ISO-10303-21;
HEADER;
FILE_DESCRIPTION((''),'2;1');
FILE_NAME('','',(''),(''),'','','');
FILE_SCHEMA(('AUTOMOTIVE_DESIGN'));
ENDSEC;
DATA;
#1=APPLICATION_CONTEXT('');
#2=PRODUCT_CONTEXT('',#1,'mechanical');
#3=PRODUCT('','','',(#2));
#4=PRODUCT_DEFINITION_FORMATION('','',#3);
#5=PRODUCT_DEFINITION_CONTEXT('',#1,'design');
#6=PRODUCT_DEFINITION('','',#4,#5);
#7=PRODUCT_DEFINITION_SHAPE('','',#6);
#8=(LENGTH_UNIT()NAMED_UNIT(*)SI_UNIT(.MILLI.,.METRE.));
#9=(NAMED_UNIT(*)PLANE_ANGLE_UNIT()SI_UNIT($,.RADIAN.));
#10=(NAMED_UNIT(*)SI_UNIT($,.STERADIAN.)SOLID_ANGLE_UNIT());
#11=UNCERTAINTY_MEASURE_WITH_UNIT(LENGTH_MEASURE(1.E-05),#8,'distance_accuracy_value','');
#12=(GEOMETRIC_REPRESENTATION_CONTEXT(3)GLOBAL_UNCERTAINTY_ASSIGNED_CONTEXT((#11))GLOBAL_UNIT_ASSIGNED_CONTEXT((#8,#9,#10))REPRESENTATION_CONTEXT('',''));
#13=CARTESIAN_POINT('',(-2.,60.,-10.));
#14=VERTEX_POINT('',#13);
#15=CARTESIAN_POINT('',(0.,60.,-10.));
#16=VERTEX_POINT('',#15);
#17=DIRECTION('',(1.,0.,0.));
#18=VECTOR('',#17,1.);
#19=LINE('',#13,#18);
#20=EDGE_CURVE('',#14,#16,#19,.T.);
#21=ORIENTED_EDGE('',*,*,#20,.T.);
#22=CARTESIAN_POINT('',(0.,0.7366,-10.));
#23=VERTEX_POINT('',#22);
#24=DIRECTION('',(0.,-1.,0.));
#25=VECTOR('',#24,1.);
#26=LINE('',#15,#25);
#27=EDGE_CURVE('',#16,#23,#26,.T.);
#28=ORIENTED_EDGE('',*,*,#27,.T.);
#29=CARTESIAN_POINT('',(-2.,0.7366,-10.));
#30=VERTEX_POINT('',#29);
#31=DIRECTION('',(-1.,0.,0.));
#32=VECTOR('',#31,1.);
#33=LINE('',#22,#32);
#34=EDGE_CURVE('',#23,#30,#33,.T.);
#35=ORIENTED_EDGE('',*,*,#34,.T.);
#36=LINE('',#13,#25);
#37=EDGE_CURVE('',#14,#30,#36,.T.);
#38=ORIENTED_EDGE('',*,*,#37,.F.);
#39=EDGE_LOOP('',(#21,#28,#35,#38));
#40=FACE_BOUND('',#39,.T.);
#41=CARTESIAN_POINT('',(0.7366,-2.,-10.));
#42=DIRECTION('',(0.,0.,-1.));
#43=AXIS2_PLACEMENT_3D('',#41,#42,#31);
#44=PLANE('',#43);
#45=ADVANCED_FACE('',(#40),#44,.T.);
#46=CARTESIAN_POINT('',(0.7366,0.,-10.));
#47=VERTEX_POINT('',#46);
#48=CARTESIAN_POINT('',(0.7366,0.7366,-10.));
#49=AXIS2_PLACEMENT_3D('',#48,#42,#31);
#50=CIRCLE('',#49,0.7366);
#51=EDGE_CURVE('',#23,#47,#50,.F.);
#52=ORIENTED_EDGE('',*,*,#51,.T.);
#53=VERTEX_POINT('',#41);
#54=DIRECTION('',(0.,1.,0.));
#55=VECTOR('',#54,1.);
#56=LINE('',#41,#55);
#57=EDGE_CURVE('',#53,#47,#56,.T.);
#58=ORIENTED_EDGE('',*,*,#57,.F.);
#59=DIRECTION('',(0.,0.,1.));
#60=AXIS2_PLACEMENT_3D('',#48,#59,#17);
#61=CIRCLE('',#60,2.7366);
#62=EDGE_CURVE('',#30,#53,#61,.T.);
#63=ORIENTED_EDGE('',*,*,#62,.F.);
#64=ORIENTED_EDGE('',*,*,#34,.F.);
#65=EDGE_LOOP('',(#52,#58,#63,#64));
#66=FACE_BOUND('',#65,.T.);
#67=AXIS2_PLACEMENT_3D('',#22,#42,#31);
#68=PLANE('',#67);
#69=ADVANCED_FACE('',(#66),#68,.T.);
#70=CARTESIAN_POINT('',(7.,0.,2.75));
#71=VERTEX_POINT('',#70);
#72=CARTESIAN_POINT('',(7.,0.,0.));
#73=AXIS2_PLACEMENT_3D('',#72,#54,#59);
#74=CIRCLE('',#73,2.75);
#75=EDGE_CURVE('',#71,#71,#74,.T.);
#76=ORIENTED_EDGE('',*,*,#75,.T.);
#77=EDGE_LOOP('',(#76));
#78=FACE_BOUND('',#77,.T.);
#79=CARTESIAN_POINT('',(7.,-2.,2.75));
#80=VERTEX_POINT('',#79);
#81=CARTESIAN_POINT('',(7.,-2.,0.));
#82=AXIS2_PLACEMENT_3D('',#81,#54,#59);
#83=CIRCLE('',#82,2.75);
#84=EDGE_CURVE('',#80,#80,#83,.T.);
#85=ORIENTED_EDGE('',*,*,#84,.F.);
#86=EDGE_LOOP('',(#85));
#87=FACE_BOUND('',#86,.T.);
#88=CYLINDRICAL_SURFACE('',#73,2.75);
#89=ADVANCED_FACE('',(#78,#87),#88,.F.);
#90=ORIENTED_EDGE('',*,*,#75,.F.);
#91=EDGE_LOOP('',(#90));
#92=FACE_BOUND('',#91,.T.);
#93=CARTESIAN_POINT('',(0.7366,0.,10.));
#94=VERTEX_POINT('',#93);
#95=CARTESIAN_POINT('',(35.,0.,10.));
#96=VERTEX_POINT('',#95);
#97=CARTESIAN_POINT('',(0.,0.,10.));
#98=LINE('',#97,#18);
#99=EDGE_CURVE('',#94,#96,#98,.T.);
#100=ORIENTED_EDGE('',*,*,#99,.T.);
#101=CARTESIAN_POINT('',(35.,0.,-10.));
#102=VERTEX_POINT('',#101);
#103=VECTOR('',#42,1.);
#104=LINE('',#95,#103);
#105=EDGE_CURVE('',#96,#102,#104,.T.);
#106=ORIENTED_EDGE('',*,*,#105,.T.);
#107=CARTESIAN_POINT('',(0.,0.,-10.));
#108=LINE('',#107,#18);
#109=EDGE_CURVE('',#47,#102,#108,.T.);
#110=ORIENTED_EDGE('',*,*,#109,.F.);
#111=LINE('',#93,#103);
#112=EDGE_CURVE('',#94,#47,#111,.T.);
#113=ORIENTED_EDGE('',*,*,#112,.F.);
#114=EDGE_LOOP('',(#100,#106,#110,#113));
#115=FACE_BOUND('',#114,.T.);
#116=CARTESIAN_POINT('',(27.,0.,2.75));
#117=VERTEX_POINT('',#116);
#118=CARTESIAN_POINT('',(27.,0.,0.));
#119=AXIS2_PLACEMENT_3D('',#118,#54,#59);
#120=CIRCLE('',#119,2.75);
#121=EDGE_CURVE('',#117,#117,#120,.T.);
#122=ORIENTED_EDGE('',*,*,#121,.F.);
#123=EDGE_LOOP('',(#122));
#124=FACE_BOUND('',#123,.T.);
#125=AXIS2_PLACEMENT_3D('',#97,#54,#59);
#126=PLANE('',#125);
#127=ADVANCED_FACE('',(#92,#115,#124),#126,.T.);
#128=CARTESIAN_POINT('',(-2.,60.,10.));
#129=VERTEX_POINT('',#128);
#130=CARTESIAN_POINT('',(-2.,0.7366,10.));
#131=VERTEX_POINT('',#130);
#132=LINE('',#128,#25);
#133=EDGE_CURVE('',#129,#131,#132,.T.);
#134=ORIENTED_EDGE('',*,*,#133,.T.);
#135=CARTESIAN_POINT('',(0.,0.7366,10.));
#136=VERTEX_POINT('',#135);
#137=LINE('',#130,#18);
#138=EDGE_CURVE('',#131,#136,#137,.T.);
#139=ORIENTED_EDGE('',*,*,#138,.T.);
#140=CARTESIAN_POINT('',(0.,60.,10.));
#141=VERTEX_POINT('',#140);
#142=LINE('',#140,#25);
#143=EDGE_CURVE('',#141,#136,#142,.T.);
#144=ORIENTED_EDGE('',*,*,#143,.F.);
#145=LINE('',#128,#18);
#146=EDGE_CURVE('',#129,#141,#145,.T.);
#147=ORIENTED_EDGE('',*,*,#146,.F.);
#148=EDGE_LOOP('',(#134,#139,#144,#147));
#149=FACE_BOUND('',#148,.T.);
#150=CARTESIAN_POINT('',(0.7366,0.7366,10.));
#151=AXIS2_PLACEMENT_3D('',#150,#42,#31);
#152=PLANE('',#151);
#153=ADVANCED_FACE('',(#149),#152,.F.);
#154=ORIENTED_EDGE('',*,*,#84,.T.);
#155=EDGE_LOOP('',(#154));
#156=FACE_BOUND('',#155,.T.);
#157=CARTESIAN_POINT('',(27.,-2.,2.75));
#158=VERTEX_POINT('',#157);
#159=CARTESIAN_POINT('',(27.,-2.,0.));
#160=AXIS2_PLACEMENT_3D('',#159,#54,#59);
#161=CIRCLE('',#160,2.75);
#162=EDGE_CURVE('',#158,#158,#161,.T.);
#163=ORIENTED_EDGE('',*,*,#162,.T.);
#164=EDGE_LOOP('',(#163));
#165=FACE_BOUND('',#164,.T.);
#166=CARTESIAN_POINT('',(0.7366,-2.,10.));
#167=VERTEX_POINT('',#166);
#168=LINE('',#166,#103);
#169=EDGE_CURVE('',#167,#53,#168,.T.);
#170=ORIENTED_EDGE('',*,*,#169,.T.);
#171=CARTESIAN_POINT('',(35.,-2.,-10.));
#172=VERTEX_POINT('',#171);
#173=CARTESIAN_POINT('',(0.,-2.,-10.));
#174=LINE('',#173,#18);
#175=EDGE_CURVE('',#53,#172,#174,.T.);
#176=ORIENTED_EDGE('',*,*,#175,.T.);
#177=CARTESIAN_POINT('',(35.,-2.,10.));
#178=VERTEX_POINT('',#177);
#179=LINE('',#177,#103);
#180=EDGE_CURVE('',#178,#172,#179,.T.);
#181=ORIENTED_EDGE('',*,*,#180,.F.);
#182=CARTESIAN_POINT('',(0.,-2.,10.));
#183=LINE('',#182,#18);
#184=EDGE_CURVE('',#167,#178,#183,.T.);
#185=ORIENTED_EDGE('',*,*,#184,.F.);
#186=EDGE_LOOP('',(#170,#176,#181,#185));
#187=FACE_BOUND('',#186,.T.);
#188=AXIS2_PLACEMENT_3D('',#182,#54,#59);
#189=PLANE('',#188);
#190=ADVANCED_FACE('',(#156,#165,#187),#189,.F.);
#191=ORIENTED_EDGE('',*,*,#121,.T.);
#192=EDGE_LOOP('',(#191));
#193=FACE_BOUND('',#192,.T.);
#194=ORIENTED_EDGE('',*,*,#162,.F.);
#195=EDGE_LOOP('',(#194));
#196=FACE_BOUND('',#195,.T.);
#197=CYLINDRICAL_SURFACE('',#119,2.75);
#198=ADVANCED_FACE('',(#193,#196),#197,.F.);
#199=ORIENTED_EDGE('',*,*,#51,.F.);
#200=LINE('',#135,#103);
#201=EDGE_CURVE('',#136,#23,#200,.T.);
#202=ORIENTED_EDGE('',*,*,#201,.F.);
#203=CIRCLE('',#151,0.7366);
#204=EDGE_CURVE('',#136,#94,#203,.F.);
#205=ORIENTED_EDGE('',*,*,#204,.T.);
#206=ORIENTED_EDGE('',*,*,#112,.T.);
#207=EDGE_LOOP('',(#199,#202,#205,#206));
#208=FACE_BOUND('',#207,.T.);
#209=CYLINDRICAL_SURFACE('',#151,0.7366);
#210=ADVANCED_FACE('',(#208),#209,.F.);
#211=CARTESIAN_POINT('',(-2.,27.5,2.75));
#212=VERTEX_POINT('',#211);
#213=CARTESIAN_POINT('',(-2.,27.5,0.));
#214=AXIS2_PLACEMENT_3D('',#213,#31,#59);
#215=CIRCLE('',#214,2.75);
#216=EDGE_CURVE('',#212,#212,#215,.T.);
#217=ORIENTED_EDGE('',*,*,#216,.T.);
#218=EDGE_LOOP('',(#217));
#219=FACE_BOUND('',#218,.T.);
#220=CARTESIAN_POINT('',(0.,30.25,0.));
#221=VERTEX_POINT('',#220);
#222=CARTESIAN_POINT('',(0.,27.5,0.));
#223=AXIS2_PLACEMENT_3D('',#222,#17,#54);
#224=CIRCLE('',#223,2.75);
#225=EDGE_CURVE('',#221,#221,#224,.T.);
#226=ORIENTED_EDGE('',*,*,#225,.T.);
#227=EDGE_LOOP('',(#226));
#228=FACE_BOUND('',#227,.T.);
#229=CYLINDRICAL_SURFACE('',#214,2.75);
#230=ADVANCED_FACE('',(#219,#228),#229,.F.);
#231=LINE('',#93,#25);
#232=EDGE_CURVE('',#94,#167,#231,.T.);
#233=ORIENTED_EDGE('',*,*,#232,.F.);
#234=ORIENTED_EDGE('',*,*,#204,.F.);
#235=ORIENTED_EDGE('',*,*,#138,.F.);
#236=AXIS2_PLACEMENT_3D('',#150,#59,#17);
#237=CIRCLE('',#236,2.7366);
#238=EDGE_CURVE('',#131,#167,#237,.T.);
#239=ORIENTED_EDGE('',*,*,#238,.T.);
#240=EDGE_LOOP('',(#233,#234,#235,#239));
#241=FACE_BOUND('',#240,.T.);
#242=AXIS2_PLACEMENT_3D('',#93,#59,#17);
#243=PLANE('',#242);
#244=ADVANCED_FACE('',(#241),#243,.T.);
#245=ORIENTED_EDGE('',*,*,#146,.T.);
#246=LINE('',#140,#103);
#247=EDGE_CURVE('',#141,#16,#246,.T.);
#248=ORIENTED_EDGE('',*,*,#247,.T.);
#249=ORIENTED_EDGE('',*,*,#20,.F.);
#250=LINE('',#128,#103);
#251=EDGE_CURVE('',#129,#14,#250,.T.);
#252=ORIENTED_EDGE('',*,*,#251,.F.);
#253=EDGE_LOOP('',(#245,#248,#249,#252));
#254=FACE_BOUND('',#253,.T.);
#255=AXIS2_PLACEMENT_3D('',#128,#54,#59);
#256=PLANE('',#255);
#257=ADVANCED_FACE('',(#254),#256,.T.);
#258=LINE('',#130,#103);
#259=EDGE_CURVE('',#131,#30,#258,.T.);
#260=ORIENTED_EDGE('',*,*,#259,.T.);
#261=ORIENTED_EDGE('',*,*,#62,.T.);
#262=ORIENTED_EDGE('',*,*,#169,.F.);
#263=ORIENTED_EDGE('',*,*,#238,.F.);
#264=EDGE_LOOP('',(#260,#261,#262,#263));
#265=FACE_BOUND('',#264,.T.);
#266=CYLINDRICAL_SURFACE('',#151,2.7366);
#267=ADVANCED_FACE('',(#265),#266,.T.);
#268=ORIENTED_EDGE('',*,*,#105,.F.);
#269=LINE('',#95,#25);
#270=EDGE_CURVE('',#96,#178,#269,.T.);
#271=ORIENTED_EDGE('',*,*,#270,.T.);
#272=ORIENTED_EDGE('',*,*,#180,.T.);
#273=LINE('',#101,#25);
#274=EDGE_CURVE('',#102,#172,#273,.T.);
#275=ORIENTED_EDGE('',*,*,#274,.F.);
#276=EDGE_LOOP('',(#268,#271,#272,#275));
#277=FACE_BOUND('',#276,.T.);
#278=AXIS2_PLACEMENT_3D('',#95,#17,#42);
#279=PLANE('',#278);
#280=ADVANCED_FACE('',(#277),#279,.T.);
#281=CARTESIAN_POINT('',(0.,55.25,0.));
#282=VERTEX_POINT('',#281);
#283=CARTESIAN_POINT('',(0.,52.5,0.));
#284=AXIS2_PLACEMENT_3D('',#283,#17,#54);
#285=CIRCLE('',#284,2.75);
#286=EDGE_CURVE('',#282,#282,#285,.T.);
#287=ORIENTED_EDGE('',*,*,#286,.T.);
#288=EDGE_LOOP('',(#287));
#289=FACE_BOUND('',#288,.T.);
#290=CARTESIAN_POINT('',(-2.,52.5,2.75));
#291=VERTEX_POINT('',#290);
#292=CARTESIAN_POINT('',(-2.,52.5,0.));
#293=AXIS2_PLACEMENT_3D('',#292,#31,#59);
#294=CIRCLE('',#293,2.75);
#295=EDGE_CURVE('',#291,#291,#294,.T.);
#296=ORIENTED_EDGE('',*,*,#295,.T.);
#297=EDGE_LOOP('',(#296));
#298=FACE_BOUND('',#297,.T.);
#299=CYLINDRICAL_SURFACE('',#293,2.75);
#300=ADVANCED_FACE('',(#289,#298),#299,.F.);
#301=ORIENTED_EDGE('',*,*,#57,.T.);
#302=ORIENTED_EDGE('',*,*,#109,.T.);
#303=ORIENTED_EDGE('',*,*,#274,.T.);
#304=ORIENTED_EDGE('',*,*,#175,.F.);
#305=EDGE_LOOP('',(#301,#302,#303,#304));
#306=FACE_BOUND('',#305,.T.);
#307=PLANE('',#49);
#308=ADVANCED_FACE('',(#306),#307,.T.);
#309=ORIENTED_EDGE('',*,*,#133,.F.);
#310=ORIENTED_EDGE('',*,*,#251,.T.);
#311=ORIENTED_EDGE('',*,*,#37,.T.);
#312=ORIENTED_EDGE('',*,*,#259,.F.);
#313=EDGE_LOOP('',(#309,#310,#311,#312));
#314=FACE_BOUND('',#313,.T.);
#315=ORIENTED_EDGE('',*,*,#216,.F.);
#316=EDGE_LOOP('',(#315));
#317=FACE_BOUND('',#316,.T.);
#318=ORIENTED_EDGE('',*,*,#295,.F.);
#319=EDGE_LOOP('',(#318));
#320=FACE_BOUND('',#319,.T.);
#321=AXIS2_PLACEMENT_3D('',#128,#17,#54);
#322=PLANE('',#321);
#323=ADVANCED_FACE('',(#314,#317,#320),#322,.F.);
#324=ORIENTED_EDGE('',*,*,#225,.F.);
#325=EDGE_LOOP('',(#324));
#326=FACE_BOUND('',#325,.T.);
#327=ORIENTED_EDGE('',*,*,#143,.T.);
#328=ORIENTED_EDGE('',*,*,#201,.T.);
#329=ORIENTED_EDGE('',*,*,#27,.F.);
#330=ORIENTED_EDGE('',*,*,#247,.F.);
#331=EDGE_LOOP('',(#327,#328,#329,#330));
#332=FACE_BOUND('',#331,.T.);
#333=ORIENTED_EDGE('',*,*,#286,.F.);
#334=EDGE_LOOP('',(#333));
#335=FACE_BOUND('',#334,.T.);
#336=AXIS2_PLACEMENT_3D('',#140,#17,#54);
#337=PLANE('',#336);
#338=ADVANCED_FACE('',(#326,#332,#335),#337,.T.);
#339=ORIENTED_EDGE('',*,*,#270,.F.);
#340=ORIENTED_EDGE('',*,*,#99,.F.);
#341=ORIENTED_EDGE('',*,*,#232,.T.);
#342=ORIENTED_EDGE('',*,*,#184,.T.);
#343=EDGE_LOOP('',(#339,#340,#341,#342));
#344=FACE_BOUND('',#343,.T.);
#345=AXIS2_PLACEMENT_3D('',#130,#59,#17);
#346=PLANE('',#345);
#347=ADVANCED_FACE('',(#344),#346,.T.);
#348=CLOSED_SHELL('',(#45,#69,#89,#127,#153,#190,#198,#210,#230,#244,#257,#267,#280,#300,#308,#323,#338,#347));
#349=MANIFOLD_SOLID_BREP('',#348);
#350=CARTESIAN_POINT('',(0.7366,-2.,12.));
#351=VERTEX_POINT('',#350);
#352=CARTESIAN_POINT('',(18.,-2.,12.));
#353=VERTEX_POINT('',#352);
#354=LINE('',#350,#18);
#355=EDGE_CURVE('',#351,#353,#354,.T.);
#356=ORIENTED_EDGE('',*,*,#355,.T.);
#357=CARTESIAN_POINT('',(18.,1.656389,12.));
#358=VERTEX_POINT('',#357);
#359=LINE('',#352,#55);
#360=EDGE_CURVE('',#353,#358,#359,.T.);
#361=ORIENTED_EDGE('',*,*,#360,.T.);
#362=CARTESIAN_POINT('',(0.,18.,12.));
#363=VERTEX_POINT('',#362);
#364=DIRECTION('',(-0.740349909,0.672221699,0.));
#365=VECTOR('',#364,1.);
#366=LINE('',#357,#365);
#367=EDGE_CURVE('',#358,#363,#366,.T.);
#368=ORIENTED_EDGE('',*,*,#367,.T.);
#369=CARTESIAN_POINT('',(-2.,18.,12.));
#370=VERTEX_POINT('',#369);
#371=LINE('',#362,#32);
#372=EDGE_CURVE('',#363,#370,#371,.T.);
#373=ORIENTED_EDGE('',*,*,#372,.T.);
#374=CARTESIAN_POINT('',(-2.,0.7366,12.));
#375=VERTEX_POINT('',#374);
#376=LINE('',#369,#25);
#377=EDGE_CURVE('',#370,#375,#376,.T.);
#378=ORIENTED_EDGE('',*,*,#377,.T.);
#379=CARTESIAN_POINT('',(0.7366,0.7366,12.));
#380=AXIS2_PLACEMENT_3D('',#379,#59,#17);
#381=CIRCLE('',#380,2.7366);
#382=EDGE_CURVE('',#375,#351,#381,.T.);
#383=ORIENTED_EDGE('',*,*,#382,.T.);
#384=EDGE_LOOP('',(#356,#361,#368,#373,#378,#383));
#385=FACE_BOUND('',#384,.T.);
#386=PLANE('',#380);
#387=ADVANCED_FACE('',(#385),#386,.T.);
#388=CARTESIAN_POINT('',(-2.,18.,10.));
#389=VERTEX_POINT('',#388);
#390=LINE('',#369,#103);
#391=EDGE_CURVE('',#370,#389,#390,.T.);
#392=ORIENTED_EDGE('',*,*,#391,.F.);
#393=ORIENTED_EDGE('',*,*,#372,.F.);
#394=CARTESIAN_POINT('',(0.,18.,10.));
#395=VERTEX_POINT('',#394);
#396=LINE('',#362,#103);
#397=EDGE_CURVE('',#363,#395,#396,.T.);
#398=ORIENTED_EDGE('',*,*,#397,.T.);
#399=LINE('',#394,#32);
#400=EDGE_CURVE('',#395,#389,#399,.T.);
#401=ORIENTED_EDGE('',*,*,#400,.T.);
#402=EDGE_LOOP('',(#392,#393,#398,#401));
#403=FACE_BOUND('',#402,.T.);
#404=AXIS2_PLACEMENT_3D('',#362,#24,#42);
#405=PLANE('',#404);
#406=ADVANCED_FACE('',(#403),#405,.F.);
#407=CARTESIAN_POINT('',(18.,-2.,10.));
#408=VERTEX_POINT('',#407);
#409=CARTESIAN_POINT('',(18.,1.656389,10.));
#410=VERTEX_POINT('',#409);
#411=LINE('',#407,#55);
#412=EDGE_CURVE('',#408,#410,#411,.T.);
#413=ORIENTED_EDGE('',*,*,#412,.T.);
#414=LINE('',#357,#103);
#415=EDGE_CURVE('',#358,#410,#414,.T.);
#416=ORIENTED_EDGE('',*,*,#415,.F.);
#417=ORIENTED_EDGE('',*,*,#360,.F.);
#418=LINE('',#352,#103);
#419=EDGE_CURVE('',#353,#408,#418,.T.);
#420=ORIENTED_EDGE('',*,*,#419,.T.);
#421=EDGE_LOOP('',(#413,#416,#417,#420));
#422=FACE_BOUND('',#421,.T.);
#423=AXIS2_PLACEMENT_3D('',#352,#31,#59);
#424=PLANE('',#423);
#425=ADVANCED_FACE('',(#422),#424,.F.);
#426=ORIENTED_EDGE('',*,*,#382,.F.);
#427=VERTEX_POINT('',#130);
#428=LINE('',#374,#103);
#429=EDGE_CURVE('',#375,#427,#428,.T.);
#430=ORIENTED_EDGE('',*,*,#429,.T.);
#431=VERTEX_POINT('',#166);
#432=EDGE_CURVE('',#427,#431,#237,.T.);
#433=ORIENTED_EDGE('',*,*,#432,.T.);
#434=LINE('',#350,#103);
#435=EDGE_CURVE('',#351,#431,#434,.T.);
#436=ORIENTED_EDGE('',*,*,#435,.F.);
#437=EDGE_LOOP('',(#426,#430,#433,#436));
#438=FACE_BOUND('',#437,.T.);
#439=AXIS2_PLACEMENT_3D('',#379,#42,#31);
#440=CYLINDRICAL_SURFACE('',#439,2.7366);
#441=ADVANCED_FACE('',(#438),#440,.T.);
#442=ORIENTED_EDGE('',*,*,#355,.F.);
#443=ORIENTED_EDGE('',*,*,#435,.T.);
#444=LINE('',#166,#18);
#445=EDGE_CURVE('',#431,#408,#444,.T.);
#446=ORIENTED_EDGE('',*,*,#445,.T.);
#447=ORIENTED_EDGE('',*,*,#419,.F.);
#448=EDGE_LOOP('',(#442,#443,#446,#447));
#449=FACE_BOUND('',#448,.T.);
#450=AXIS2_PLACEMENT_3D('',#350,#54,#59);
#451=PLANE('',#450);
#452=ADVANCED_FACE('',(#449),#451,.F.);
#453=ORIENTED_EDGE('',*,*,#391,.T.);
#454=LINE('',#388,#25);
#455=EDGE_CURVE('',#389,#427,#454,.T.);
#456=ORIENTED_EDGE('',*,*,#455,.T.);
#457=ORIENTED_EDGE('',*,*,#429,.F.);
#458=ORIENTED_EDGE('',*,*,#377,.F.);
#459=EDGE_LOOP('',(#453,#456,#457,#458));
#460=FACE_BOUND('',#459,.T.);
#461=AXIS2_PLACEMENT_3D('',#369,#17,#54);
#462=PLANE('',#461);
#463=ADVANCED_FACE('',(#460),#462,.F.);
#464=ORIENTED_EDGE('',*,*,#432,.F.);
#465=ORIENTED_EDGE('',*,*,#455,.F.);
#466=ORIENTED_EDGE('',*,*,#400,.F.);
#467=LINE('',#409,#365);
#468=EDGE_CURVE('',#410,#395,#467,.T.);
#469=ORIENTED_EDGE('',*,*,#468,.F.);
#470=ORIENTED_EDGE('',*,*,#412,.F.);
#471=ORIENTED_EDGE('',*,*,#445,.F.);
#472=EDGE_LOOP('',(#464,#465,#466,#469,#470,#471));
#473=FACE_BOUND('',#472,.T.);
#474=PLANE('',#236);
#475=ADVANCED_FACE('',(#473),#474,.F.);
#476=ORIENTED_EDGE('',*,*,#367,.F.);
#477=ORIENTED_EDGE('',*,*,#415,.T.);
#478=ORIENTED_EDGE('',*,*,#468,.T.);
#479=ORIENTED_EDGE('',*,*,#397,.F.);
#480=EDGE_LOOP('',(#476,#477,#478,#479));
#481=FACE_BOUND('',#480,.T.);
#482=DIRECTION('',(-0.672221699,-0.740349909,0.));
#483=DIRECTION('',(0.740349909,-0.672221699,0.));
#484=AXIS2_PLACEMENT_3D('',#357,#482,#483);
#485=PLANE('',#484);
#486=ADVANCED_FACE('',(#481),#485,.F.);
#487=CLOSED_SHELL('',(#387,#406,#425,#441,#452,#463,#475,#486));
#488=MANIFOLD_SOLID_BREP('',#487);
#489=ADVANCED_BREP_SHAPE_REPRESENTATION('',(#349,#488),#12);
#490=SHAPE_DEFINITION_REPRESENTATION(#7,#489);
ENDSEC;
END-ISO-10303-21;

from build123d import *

# Parameters (mm, degrees)
SM_BASE_FLANGE_1_DEPTH  = 10
HOLE_WIZARD_5_5_5_5_1_D = 5.5
HOLE_WIZARD_5_5_5_5_2_D = 5.5
SM_START                = 2
SM_BASE_FLANGE_2_DEPTH  = 2


# Sheet-metal steps are written as plain solids
with BuildPart() as part:
    # Sketch 1 → 基体-法兰1 (new, symmetric)
    with BuildSketch(Plane.XY):
        with BuildLine():
            Line((0, 60), (0, 0.7366))
            ThreePointArc((0, 0.7366), (0.215745145, 0.215745145), (0.7366, 0))
            Line((0.7366, 0), (35, 0))
            Line((35, 0), (35, -2))
            Line((35, -2), (0.7366, -2))
            ThreePointArc((0.7366, -2), (-1.198468417, -1.198468417), (-2, 0.7366))
            Line((-2, 0.7366), (-2, 60))
            Line((-2, 60), (0, 60))
        make_face()
    extrude(amount=SM_BASE_FLANGE_1_DEPTH, both=True)

    # Ø5.5 (5.5) 直径孔1 (through all)
    with Locations(Plane(origin=(7, 0, 0), x_dir=(0, 0, 1), z_dir=(0, 1, 0))):
        with Locations((0, 0), (0, 20)):
            Hole(HOLE_WIZARD_5_5_5_5_1_D / 2)

    # Ø5.5 (5.5) 直径孔2 (through all)
    with Locations(Plane(origin=(-2, 52.5, 0), x_dir=(0, 0, -1), z_dir=(-1, 0, 0))):
        with Locations((0, 0), (0, 25)):
            Hole(HOLE_WIZARD_5_5_5_5_2_D / 2)


with BuildPart() as body_2:
    # 草图11 → 基体-法兰2 (new body)
    with BuildSketch(Plane.XY.offset(10).offset(SM_START)):
        with BuildLine():
            Line((18, -2), (18, 1.656389448))
            Line((18, 1.656389448), (0, 18))
            Line((0, 18), (-2, 18))
            Line((-2, 18), (-2, 0.7366))
            ThreePointArc((-2, 0.7366), (-1.198468417, -1.198468417), (0.7366, -2))
            Line((0.7366, -2), (18, -2))
        make_face()
    extrude(amount=-SM_BASE_FLANGE_2_DEPTH)


solid = Compound([part.part, body_2.part])
